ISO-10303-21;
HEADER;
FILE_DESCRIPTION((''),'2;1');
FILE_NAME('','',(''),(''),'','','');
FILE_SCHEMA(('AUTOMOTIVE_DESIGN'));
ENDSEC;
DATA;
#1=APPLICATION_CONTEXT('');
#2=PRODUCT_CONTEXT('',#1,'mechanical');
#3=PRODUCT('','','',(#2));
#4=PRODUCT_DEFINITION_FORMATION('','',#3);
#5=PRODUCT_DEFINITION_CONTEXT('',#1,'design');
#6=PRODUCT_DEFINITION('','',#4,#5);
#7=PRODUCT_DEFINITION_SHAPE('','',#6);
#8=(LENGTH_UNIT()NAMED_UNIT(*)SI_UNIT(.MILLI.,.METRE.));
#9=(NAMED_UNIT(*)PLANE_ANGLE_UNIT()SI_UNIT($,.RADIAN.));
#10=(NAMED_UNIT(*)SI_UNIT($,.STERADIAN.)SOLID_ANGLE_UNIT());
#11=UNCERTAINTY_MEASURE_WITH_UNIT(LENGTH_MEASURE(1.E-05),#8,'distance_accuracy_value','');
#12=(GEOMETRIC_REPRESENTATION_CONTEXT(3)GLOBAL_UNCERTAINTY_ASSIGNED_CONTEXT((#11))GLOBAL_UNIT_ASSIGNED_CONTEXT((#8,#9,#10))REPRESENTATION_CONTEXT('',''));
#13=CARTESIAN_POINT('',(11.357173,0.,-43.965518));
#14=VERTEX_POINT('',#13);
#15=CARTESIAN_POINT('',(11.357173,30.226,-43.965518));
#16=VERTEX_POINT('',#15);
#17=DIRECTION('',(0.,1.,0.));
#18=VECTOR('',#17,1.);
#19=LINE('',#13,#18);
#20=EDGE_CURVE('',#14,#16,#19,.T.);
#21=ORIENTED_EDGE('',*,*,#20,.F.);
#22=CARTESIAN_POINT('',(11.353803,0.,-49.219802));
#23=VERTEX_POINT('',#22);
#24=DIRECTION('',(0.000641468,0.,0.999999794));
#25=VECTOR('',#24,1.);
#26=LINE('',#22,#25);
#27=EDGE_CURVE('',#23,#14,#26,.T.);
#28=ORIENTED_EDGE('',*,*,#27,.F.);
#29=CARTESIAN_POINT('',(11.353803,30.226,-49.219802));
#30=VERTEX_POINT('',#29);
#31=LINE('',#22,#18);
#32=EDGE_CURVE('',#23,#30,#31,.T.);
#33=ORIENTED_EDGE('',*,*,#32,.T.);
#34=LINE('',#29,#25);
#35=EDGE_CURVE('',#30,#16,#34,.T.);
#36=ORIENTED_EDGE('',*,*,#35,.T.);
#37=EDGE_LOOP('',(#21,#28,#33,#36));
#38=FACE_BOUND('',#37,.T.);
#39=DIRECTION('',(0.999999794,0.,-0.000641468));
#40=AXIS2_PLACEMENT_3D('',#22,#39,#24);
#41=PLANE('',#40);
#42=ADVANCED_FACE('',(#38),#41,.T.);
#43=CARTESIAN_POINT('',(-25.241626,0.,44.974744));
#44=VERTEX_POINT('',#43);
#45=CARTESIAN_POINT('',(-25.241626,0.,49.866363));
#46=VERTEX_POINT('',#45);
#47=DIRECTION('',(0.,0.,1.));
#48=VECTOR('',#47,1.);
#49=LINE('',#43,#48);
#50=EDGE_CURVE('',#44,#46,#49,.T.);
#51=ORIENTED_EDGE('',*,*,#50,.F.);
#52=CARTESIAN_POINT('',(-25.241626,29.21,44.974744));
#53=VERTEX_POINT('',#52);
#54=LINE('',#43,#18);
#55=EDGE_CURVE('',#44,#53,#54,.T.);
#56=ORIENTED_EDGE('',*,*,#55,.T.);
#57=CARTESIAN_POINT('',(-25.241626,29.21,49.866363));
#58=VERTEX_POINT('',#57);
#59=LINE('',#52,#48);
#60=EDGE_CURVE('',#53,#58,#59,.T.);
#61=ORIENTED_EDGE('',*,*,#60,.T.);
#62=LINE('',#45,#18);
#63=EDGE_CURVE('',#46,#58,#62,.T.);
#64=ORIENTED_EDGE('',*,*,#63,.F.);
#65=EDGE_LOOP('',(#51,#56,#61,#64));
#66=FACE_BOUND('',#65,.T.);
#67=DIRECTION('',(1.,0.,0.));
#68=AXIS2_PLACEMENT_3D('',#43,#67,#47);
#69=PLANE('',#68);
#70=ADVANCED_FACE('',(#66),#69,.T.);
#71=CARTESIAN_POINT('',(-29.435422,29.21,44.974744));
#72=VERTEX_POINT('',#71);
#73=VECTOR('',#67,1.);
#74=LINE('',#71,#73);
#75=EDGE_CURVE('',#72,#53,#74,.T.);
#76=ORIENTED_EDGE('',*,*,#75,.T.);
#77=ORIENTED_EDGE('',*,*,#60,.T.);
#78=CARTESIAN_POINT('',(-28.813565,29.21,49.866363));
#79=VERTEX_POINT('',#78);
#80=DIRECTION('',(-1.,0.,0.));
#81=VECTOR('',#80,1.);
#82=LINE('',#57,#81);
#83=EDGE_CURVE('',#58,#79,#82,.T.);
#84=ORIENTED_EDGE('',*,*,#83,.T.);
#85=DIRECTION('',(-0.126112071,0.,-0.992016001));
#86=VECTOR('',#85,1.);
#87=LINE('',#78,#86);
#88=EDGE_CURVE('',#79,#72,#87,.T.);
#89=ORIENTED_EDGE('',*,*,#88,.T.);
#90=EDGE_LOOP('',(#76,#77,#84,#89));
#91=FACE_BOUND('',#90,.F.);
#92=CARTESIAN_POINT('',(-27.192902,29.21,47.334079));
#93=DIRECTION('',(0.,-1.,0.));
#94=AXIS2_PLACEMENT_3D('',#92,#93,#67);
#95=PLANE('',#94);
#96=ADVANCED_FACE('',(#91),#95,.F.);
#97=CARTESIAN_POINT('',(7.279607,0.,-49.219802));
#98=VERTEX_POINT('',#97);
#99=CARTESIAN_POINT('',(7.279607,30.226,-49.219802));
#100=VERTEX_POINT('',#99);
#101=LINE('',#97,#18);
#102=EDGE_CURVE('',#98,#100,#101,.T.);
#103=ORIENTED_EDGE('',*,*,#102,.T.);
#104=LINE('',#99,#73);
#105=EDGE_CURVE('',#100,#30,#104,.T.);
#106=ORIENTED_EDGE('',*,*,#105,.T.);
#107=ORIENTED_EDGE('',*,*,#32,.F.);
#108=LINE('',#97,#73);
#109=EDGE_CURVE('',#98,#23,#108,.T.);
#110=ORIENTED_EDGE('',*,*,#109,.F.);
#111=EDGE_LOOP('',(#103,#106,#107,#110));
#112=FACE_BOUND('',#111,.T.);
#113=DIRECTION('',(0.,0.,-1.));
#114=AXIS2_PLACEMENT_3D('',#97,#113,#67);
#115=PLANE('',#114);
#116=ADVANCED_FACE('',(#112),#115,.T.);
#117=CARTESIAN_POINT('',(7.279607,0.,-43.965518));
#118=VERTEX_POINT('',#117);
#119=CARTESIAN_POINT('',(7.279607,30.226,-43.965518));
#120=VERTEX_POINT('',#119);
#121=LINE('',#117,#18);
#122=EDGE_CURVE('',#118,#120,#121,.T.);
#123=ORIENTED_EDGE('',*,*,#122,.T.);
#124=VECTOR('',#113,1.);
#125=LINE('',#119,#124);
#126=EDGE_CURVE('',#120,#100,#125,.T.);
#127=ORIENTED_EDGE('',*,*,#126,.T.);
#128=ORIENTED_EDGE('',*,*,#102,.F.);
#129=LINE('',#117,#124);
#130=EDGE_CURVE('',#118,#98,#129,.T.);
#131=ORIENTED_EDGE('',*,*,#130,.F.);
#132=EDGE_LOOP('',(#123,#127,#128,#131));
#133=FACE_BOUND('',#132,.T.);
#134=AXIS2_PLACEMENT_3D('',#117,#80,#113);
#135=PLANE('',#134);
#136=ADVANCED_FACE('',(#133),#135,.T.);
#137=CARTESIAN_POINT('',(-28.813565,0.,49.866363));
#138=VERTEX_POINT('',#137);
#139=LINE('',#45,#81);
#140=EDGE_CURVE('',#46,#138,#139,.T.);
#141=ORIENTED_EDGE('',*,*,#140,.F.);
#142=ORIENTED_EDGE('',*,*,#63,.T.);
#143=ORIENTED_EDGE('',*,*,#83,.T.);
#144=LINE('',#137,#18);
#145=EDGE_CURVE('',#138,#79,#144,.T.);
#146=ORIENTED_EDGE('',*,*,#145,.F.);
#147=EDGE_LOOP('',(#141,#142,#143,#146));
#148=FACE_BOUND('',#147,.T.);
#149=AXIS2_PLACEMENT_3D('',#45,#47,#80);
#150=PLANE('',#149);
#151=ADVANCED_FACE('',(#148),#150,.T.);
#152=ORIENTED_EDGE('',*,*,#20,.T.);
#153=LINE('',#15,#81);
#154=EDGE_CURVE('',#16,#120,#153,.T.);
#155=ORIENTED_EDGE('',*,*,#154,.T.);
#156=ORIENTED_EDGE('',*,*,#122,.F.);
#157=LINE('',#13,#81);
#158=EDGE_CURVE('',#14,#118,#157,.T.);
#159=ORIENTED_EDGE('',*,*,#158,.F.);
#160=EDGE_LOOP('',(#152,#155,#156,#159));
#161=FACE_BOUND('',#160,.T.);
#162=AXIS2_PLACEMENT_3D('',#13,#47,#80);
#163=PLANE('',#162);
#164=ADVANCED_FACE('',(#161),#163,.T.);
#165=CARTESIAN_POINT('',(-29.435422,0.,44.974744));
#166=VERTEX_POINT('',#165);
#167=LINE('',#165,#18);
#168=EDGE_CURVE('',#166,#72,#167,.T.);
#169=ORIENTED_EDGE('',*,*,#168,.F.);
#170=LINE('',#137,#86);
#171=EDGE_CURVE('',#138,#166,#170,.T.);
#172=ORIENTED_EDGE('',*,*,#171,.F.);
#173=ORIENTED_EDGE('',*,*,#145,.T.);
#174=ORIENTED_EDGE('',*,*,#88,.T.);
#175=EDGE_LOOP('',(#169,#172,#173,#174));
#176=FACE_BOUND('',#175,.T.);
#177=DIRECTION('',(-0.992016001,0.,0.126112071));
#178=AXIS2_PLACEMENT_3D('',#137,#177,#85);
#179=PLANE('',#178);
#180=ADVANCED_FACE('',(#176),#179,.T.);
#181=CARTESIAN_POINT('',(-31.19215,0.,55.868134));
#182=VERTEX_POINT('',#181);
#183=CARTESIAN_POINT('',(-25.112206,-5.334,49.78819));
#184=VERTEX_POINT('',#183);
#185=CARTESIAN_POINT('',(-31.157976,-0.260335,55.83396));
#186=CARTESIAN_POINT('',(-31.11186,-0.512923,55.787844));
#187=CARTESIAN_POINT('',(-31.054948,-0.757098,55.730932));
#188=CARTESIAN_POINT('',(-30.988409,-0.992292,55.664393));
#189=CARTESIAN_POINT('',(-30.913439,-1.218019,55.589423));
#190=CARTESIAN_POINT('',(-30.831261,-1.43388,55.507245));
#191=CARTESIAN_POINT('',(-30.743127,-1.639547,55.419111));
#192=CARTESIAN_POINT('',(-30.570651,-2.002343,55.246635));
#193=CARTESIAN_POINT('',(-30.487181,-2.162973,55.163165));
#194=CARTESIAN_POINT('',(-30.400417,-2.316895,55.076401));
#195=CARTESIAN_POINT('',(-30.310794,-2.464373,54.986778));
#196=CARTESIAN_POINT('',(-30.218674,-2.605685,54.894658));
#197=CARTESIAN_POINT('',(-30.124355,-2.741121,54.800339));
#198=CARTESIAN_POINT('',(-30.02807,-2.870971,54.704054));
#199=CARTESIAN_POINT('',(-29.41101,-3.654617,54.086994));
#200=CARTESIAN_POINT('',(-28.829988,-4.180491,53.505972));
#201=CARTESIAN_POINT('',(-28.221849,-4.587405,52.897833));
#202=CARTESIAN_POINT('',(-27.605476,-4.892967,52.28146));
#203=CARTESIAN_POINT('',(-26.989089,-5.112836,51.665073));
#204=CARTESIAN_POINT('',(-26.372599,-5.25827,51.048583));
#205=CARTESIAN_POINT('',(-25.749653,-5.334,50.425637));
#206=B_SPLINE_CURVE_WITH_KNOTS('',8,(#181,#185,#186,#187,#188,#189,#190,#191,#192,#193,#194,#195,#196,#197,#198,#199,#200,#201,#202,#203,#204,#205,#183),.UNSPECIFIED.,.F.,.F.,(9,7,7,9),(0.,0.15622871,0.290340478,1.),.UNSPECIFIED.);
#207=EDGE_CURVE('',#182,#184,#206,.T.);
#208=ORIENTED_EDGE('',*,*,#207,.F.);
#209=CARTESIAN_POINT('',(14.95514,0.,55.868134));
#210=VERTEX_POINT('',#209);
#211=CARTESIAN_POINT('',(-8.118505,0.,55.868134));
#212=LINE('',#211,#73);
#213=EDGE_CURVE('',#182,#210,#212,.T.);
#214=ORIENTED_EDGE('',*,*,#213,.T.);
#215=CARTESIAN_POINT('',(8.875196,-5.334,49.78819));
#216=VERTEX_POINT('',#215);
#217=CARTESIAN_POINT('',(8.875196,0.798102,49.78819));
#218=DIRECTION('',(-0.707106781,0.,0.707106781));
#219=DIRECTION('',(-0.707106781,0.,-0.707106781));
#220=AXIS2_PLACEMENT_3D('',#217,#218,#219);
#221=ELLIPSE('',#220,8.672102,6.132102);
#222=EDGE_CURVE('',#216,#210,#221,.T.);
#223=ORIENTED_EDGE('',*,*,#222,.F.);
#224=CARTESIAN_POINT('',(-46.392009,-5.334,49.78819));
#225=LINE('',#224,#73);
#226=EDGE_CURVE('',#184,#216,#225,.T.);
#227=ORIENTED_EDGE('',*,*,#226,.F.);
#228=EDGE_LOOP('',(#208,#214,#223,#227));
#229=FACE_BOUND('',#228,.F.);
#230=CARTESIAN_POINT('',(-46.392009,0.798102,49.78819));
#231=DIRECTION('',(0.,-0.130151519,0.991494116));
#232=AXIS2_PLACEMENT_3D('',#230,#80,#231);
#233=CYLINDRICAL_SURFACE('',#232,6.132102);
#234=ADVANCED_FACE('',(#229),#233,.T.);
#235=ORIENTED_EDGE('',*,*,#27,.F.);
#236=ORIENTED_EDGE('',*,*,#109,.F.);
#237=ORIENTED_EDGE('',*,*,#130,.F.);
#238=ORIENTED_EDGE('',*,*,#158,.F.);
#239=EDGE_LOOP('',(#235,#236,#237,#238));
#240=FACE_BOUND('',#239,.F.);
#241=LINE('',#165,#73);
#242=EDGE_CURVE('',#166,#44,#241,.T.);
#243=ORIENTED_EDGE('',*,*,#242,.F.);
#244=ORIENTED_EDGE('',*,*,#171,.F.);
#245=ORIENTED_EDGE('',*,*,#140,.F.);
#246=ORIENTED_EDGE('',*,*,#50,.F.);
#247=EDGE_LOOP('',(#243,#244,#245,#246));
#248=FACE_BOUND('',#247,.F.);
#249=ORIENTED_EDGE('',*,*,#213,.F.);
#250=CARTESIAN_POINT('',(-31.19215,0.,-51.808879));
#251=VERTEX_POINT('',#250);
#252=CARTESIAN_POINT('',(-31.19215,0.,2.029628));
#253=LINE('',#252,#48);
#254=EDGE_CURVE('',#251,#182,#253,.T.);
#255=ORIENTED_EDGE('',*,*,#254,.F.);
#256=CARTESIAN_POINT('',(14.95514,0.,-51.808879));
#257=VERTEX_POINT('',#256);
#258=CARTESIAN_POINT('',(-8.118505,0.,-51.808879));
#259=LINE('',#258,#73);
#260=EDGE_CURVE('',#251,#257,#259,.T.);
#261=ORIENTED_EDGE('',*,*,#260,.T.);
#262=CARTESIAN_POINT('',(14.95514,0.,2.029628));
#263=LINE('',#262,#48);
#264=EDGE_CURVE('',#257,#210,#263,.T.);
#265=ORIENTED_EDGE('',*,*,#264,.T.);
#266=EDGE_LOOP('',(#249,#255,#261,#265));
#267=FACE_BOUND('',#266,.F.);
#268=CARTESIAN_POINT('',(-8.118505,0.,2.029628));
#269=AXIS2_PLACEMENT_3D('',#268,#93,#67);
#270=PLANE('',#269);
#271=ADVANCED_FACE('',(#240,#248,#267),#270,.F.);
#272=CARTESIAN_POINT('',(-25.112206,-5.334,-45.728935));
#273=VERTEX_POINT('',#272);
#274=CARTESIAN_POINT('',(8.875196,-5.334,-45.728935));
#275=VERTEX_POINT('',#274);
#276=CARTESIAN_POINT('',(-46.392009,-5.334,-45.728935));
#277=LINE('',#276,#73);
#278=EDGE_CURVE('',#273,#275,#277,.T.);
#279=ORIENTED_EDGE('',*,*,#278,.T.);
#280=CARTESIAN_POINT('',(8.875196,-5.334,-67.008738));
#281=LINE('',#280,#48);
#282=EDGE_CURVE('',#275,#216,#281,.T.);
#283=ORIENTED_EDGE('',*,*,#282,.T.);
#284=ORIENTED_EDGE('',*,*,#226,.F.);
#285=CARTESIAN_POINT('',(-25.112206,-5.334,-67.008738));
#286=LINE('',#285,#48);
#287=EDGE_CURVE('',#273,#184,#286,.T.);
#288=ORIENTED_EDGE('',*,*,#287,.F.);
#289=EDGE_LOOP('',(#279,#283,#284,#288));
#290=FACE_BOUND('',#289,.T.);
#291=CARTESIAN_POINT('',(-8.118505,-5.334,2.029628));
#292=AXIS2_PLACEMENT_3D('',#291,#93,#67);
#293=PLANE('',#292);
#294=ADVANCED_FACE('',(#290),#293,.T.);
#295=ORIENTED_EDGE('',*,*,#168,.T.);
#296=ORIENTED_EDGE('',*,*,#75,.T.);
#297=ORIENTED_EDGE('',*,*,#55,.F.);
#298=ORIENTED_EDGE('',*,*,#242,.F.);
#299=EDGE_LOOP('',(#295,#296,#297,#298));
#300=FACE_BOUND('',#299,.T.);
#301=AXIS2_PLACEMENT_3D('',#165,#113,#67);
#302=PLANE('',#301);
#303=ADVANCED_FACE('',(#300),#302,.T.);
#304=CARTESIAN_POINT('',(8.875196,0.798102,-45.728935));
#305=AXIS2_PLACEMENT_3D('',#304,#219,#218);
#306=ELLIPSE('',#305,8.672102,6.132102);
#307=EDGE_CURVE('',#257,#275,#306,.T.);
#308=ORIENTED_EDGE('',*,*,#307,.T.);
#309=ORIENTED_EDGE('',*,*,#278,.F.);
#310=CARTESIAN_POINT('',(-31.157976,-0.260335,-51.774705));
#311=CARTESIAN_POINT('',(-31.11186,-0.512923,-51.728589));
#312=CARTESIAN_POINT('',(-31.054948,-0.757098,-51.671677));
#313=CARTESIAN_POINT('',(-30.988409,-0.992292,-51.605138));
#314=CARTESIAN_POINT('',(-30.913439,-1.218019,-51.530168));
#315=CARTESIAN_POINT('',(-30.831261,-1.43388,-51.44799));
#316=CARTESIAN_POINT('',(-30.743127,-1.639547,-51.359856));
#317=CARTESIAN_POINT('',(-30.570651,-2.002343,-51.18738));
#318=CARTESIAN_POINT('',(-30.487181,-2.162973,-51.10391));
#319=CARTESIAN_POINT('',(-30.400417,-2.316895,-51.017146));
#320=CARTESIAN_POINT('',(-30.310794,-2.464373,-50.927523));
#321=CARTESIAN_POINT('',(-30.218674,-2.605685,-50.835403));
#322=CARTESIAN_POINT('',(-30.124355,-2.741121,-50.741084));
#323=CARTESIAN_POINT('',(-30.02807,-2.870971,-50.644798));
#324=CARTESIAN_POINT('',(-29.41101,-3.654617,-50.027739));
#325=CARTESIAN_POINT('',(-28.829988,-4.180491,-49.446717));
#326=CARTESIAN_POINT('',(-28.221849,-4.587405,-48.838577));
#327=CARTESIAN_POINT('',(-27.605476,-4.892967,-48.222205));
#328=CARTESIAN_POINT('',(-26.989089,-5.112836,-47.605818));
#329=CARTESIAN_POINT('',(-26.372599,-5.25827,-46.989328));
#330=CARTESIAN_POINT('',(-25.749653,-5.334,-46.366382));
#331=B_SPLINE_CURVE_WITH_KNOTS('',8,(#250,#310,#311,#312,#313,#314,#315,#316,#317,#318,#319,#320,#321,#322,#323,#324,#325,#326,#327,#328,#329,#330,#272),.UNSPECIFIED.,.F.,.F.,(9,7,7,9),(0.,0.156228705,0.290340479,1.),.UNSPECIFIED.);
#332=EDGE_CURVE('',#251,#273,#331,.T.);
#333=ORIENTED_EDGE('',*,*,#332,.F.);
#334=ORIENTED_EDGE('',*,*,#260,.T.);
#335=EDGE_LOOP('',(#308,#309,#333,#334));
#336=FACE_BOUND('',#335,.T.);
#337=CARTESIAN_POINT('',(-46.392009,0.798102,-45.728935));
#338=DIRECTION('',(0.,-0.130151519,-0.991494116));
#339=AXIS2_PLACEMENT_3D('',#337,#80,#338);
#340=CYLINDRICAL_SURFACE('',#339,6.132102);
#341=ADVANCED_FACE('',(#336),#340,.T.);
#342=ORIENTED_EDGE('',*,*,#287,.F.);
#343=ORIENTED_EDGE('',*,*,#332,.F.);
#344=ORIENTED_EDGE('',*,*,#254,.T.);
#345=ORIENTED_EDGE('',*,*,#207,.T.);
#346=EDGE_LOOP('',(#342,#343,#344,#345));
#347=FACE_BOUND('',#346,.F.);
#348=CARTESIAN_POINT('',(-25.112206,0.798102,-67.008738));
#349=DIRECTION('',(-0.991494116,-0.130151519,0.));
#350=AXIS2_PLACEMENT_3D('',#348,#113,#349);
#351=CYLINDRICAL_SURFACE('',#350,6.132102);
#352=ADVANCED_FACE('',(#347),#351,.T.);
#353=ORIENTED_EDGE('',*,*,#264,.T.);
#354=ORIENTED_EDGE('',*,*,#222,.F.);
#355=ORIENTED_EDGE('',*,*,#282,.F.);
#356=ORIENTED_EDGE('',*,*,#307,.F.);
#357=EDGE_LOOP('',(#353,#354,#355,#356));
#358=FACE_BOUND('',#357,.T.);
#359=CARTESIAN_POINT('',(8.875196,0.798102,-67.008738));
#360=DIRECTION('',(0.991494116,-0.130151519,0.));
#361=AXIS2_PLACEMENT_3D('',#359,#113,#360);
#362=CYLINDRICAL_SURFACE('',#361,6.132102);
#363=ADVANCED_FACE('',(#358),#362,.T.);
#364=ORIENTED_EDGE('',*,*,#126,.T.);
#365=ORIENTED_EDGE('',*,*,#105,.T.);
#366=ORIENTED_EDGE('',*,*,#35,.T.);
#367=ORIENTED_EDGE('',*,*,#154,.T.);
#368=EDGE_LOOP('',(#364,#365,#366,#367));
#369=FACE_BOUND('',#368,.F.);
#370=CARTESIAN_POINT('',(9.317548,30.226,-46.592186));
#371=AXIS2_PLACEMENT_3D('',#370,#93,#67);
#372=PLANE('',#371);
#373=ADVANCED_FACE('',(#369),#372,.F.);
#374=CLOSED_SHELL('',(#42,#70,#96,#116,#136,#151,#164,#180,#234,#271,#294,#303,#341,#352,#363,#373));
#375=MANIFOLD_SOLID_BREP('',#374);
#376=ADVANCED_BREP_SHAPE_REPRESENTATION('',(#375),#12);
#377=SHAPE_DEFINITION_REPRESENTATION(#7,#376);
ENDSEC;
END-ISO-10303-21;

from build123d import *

# Parameters (mm, degrees)
F0_W        = 46.1472896859
F0_H        = 107.677012682
F1_DEPTH    = 5.334
F2_T1_DEPTH = 76.5470071681
F2_T3_DEPTH = 138.0767301641
F6_DEPTH    = 29.21
F8_DEPTH    = 30.226


# Not quite as in the source:
# - a fillet or chamfer that OpenCascade refuses, or shapes differently, is made with other operations: its cross-section is extruded or revolved along the edge and cut away or added
# - the program builds the solid bodies; features that only make, move or delete a surface that nothing else refers to are left out


with BuildPart() as f1:
    # F0 (on Front) → F1 (new body)
    with BuildSketch(Plane.XZ):
        with Locations((-8.118505124, 2.0296275616)):
            Rectangle(F0_W, F0_H)
    extrude(amount=F1_DEPTH)

    # F2: fillet of radius 6.1321024484 on 4 edges, made by hand

    # F2_s2 → F2_t1 (cut)
    with BuildSketch(Plane.YZ.offset(-46.392008708)):
        with BuildLine():
            ThreePointArc((0, 55.8681339025), (-3.8114922418, 53.8322375411), (-5.334, 49.7881904061))
            Line((-5.334, 49.7881904061), (-5.334, 55.8681339025))
            Line((-5.334, 55.8681339025), (0, 55.8681339025))
        make_face()
        with BuildLine():
            ThreePointArc((0, -51.8088787794), (-3.8114922418, -49.772982418), (-5.334, -45.728935283))
            Line((-5.334, -45.728935283), (-5.334, -51.8088787794))
            Line((-5.334, -51.8088787794), (0, -51.8088787794))
        make_face()
    extrude(amount=F2_T1_DEPTH, mode=Mode.SUBTRACT)

    # F2_s4 → F2_t3 (cut)
    with BuildSketch(Plane.XY.offset(-67.0087375205)):
        with BuildLine():
            ThreePointArc((-31.192149967, 0), (-29.1562536055, -3.8114922418), (-25.1122064705, -5.334))
            Line((-25.1122064705, -5.334), (-31.192149967, -5.334))
            Line((-31.192149967, -5.334), (-31.192149967, 0))
        make_face()
        with BuildLine():
            ThreePointArc((14.9551397189, 0), (12.9192433575, -3.8114922418), (8.8751962225, -5.334))
            Line((8.8751962225, -5.334), (14.9551397189, -5.334))
            Line((14.9551397189, -5.334), (14.9551397189, 0))
        make_face()
    extrude(amount=F2_T3_DEPTH, mode=Mode.SUBTRACT)

    # F5 (on Front) → F6 (join)
    with BuildSketch(Plane.XZ):
        Polygon((-25.2416264266, 49.8663634062), (-28.8135651499, 49.8663634062), (-29.4354222715, 44.9747443199), (-25.2416264266, 44.9747443199), align=None)
    extrude(amount=-F6_DEPTH)

    # F7 (on Front) → F8 (join)
    with BuildSketch(Plane.XZ):
        Polygon((11.3538028672, -49.219802022), (11.3571733236, -43.9655184746), (7.279606536, -43.9655184746), (7.279606536, -49.219802022), align=None)
    extrude(amount=-F8_DEPTH)


solid = f1.part
